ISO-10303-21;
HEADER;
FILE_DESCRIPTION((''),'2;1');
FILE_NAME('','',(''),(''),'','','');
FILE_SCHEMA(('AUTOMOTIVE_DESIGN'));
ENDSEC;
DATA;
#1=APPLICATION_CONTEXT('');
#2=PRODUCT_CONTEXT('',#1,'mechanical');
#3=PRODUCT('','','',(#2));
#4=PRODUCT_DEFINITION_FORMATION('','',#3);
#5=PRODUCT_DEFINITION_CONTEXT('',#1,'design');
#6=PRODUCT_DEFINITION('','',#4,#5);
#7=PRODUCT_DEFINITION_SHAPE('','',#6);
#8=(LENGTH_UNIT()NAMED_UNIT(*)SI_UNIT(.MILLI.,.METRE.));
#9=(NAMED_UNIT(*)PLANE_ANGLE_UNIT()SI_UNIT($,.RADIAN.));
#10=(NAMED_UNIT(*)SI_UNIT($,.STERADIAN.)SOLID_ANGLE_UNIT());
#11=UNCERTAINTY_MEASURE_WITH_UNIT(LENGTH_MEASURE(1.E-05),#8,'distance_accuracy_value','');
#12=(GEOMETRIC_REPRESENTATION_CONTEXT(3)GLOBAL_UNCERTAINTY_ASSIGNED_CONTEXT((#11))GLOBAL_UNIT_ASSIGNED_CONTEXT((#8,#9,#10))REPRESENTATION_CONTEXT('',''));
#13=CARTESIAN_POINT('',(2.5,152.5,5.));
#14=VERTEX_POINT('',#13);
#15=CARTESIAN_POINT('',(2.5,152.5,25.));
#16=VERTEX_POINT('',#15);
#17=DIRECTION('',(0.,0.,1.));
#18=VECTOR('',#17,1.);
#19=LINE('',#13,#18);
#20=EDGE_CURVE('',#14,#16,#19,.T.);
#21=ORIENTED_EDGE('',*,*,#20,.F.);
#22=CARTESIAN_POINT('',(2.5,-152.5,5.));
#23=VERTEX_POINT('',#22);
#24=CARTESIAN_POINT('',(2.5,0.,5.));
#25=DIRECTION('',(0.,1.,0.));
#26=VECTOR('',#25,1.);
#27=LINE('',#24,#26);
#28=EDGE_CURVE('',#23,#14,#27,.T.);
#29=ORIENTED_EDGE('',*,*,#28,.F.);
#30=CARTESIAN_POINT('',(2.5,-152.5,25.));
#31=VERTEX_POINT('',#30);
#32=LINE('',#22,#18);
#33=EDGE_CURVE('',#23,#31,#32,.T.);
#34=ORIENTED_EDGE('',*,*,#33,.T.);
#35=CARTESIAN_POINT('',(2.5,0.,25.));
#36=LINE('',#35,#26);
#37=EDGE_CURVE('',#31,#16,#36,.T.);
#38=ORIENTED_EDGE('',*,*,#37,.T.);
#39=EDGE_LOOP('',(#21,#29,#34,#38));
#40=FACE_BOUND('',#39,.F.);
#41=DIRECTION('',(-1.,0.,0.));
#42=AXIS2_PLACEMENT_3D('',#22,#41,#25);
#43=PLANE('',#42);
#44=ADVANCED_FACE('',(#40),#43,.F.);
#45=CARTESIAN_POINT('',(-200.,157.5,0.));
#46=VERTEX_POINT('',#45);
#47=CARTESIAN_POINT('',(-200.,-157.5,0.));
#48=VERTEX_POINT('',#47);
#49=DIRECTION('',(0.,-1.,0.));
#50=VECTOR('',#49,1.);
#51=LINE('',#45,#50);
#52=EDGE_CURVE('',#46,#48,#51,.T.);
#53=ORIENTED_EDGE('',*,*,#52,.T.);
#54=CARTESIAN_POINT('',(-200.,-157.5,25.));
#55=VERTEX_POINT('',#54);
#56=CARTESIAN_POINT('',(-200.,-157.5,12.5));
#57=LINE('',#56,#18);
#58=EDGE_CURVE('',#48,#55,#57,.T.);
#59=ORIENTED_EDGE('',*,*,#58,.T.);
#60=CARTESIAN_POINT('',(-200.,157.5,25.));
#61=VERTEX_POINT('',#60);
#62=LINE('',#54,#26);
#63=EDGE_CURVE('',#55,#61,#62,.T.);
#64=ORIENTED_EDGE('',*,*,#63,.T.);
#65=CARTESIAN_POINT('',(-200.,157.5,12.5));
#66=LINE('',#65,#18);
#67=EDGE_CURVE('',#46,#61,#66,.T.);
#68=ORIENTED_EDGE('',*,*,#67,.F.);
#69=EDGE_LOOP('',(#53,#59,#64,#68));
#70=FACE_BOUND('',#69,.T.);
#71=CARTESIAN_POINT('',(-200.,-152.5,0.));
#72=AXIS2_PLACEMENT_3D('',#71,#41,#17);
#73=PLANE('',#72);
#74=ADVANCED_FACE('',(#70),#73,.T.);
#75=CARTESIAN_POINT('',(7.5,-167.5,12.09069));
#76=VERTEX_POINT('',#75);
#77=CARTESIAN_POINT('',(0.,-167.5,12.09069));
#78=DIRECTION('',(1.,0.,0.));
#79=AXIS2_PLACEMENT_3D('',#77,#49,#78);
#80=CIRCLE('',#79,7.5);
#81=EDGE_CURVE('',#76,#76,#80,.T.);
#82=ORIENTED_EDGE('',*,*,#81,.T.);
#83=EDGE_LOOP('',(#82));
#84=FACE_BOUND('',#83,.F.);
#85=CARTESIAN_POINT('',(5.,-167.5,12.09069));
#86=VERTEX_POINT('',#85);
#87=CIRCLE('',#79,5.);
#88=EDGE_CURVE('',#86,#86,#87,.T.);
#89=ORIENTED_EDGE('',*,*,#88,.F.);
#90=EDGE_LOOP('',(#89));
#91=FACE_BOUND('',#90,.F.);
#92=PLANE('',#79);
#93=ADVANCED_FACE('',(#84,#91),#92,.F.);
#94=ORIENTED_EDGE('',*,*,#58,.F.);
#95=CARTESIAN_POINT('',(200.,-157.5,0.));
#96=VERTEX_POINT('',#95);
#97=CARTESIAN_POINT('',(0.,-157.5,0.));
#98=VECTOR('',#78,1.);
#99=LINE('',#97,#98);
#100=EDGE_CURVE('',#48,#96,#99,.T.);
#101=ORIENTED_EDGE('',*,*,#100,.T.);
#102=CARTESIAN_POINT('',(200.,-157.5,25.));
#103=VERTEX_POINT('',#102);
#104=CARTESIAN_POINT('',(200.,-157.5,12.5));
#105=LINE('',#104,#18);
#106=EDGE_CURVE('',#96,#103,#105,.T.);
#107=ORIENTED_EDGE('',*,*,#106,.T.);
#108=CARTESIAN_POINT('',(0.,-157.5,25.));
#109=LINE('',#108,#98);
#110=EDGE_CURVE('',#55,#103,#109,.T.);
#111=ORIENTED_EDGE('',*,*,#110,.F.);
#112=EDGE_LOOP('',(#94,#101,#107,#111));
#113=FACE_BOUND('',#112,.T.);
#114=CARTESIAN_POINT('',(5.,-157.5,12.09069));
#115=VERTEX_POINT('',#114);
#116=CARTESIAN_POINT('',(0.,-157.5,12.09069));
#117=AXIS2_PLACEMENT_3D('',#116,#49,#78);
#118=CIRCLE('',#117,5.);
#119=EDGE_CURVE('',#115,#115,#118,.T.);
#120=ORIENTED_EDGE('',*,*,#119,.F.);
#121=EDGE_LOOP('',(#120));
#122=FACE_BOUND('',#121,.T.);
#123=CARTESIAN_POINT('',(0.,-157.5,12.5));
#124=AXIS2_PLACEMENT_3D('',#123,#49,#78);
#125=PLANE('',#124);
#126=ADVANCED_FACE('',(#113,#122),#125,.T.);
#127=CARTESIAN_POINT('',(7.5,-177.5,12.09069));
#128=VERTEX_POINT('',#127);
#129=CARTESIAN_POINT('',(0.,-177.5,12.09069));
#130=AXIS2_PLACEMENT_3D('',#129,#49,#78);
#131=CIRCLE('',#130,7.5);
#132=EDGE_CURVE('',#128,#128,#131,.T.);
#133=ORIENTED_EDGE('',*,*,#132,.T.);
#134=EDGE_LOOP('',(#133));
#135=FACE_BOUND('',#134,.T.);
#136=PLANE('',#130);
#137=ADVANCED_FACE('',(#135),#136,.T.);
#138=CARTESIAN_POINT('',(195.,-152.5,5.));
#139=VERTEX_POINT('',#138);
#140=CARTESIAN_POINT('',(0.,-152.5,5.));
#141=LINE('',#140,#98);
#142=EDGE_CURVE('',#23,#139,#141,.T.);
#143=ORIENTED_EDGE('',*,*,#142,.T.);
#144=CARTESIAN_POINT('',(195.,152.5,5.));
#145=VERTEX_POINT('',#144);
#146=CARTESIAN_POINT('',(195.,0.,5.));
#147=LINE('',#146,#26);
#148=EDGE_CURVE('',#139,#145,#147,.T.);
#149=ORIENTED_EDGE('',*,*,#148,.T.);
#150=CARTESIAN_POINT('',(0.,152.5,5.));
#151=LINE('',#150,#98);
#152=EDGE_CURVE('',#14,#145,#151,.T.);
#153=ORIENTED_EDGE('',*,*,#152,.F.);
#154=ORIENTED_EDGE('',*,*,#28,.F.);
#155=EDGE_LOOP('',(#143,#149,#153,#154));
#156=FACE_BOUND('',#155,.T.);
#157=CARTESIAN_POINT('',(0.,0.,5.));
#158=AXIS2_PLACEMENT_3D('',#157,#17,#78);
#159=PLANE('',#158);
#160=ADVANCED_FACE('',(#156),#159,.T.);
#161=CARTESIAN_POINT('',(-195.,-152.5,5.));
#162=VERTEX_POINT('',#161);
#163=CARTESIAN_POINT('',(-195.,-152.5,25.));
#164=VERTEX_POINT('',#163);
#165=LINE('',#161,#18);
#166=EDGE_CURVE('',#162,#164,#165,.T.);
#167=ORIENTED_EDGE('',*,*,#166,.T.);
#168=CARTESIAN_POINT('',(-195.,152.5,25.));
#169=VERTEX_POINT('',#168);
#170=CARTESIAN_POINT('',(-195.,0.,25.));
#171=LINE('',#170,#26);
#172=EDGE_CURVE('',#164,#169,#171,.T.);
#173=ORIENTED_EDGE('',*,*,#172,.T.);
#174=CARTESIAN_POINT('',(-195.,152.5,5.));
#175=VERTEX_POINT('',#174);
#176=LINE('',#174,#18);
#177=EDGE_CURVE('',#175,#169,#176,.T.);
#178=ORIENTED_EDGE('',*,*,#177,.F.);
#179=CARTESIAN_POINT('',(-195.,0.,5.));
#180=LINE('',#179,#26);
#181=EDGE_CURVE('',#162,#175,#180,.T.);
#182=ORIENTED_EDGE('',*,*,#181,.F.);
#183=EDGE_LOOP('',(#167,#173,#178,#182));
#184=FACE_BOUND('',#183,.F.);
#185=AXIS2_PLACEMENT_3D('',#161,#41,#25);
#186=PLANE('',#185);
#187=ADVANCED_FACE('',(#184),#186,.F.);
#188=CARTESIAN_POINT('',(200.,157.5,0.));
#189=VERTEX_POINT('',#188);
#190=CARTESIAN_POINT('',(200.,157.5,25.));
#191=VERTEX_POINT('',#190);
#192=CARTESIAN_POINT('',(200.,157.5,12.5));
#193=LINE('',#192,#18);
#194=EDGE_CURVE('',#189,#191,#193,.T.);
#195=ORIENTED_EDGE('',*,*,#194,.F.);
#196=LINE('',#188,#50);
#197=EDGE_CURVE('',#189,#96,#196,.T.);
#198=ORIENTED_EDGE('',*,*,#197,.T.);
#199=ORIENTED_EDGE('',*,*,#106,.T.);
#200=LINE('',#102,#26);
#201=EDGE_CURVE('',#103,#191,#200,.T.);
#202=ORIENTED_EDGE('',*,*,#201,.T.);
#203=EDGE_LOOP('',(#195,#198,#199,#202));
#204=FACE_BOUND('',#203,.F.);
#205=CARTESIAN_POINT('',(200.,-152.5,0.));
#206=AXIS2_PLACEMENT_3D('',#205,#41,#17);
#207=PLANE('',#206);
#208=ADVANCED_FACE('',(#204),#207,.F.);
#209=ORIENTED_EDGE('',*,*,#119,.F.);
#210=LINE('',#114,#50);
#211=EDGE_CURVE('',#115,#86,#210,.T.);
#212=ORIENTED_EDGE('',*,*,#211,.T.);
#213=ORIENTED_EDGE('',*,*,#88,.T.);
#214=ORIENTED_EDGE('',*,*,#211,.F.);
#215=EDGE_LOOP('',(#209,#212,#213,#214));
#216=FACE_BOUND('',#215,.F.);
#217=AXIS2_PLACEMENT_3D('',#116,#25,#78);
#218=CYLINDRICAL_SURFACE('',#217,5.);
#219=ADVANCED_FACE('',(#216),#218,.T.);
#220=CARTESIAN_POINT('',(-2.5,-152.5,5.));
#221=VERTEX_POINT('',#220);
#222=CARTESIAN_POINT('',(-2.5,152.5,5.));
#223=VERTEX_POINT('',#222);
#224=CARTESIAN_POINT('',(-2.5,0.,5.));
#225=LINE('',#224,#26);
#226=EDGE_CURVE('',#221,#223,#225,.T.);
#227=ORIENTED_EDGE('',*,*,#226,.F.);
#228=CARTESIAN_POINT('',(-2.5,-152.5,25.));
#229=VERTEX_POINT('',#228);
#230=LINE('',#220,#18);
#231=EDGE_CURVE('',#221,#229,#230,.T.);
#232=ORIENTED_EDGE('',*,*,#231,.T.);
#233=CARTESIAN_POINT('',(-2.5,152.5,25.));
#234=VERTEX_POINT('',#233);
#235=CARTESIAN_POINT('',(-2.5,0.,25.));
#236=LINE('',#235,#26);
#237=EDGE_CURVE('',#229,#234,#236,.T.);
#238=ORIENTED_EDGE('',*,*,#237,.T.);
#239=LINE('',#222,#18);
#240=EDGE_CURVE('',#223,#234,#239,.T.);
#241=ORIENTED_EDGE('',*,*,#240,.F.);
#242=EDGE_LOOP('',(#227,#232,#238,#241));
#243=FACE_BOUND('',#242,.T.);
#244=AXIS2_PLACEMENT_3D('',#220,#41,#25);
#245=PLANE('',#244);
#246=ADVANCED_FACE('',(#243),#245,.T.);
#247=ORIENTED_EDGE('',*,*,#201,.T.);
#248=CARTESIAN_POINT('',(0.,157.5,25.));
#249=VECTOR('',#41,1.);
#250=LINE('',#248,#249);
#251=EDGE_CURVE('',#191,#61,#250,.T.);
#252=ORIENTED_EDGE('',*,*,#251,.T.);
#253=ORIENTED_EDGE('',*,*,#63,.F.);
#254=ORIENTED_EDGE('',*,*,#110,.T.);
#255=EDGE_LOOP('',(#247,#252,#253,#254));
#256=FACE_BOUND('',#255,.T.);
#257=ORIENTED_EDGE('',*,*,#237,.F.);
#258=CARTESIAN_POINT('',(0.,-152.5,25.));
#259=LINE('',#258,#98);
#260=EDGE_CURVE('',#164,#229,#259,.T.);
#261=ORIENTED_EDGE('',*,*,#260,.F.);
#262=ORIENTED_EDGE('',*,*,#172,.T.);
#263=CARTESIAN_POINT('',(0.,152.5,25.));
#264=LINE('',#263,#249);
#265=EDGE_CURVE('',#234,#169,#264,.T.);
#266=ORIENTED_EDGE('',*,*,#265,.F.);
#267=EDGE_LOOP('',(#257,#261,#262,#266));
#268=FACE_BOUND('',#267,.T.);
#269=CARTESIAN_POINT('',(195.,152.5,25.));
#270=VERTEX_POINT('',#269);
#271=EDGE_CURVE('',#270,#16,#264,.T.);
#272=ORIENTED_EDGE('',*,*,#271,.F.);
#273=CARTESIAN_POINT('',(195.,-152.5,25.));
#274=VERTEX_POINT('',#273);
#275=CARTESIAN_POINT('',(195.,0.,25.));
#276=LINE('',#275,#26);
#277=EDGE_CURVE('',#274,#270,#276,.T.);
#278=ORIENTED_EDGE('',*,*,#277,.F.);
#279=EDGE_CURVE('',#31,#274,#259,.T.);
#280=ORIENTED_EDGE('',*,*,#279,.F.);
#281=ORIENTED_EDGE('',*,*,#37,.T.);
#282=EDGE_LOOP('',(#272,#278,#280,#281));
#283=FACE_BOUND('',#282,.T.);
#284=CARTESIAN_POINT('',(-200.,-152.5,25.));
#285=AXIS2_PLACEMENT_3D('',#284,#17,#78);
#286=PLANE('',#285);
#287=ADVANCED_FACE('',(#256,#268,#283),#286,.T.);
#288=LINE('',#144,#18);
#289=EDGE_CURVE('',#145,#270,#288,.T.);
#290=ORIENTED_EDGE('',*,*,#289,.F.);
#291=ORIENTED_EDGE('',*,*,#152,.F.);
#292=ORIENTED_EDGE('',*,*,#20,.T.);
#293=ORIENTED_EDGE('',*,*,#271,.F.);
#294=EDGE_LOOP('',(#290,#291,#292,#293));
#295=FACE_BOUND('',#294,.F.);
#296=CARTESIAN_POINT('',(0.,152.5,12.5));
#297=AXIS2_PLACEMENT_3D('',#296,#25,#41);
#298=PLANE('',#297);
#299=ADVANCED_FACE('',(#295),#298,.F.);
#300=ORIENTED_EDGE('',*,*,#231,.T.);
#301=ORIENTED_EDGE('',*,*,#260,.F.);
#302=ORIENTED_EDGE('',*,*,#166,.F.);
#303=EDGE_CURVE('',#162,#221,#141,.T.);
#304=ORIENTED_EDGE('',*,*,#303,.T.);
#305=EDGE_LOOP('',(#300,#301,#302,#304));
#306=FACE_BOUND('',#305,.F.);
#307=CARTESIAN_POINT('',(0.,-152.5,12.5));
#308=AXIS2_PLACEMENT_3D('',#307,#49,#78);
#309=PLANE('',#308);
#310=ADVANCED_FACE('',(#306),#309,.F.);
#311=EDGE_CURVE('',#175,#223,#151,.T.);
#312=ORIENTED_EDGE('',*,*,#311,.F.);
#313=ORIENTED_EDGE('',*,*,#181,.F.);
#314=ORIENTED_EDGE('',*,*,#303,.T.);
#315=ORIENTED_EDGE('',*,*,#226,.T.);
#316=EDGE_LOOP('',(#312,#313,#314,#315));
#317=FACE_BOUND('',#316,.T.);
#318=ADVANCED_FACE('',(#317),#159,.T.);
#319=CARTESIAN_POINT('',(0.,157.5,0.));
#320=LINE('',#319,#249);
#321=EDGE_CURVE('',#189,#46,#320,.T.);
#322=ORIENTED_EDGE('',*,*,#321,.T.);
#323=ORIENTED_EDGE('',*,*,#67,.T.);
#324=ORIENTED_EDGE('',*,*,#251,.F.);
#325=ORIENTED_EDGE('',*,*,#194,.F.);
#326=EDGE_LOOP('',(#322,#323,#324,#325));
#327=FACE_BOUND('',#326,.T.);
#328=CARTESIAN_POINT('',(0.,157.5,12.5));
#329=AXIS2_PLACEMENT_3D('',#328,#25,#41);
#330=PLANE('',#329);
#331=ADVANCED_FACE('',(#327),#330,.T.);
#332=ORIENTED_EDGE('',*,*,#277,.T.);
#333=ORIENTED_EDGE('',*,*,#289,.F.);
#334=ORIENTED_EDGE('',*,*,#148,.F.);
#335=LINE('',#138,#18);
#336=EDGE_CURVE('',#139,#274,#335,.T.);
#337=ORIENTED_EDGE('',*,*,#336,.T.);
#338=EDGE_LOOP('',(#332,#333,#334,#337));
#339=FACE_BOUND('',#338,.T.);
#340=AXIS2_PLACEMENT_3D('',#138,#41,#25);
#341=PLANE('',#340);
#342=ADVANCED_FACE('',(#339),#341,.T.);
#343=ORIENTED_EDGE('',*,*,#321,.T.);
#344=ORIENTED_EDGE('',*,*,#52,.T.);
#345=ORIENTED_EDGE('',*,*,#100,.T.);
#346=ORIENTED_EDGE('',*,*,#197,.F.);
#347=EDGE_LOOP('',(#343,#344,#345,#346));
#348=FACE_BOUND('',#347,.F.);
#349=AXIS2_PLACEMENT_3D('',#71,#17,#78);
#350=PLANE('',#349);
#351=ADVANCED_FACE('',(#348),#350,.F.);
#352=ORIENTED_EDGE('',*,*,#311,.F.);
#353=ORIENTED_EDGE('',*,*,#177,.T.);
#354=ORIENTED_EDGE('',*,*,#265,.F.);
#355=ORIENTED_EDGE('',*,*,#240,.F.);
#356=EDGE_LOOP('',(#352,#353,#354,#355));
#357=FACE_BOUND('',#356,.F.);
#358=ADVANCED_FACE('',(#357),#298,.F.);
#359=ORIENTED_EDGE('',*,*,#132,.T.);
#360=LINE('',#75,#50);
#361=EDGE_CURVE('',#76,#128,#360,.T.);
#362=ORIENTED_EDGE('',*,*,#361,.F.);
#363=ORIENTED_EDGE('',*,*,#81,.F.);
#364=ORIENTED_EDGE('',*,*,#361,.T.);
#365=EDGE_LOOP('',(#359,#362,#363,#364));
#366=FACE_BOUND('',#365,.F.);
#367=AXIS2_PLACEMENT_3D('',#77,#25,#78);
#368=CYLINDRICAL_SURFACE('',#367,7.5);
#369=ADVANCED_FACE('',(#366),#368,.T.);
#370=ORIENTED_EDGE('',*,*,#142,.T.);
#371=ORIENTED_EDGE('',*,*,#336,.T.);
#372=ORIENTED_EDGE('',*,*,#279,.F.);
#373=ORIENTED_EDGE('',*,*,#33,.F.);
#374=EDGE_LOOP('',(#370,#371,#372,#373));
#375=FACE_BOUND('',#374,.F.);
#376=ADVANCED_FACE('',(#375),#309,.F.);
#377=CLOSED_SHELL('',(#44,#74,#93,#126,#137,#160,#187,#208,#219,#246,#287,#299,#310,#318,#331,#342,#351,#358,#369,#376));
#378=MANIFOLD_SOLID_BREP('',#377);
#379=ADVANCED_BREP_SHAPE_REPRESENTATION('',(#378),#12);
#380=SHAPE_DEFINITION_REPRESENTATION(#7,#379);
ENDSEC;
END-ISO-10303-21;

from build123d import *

# Parameters (mm, degrees)
F0_W      = 38.3663107641
F0_H      = 42.2096475959
F1_DEPTH  = 0.6858
F3_W      = 400
F3_H      = 305
F4_DEPTH  = 5
F5_W      = 5
F5_H      = 305
F6_DEPTH  = 20
F7_W      = 5
F7_H      = 305
F8_DEPTH  = 20
F9_W      = 400
F9_H      = 25
F10_DEPTH = 5
F11_W     = 5
F11_H     = 305
F12_DEPTH = 20
F13_W     = 400
F13_H     = 25
F14_DEPTH = 5
F15_R     = 5
F16_DEPTH = 10
F17_R     = 7.5
F17_R_2   = 5
F18_DEPTH = 10


with BuildPart() as f1:
    # F0 (on Top) → F1 (new body)
    with BuildSketch(Plane.XY):
        with Locations((-14.0401979443, 21.1048237979)):
            Rectangle(F0_W, F0_H)
    extrude(amount=F1_DEPTH)


with BuildPart() as f4:
    # F3 (on Top) → F4 (new body)
    with BuildSketch(Plane.XY):
        Rectangle(F3_W, F3_H)
    extrude(amount=F4_DEPTH)

    # F5 (on face) → F6 (join)
    with BuildSketch(Plane.XY.offset(5)):
        with Locations((-197.5, 0)):
            Rectangle(F5_W, F5_H)
    extrude(amount=F6_DEPTH)

    # F7 (on face) → F8 (join)
    with BuildSketch(Plane.XY.offset(5)):
        with Locations((197.5, 0)):
            Rectangle(F7_W, F7_H)
    extrude(amount=F8_DEPTH)

    # F9 (on face) → F10 (join)
    with BuildSketch(Plane(origin=(0, 152.5, 0), x_dir=(-1, 0, 0), z_dir=(0, 1, 0))):
        with Locations((0, 12.5)):
            Rectangle(F9_W, F9_H)
    extrude(amount=F10_DEPTH)

    # F11 (on face) → F12 (join)
    with BuildSketch(Plane.XY.offset(5)):
        Rectangle(F11_W, F11_H)
    extrude(amount=F12_DEPTH)

    # F13 (on face) → F14 (join)
    with BuildSketch(Plane.XZ.offset(152.5)):
        with Locations((0, 12.5)):
            Rectangle(F13_W, F13_H)
    extrude(amount=F14_DEPTH)

    # F15 (on face) → F16 (join)
    with BuildSketch(Plane.XZ.offset(157.5)):
        with Locations((0, 12.090690434)):
            Circle(F15_R)
    extrude(amount=F16_DEPTH)

    # F17 (on face) → F18 (join)
    with BuildSketch(Plane.XZ.offset(167.5)):
        with Locations((0, 12.090690434)):
            Circle(F17_R)
        with Locations((0, 12.090690434)):
            Circle(F17_R_2, mode=Mode.SUBTRACT)
        with Locations((0, 12.090690434)):
            Circle(F17_R_2)
    extrude(amount=F18_DEPTH)


solid = f4.part
